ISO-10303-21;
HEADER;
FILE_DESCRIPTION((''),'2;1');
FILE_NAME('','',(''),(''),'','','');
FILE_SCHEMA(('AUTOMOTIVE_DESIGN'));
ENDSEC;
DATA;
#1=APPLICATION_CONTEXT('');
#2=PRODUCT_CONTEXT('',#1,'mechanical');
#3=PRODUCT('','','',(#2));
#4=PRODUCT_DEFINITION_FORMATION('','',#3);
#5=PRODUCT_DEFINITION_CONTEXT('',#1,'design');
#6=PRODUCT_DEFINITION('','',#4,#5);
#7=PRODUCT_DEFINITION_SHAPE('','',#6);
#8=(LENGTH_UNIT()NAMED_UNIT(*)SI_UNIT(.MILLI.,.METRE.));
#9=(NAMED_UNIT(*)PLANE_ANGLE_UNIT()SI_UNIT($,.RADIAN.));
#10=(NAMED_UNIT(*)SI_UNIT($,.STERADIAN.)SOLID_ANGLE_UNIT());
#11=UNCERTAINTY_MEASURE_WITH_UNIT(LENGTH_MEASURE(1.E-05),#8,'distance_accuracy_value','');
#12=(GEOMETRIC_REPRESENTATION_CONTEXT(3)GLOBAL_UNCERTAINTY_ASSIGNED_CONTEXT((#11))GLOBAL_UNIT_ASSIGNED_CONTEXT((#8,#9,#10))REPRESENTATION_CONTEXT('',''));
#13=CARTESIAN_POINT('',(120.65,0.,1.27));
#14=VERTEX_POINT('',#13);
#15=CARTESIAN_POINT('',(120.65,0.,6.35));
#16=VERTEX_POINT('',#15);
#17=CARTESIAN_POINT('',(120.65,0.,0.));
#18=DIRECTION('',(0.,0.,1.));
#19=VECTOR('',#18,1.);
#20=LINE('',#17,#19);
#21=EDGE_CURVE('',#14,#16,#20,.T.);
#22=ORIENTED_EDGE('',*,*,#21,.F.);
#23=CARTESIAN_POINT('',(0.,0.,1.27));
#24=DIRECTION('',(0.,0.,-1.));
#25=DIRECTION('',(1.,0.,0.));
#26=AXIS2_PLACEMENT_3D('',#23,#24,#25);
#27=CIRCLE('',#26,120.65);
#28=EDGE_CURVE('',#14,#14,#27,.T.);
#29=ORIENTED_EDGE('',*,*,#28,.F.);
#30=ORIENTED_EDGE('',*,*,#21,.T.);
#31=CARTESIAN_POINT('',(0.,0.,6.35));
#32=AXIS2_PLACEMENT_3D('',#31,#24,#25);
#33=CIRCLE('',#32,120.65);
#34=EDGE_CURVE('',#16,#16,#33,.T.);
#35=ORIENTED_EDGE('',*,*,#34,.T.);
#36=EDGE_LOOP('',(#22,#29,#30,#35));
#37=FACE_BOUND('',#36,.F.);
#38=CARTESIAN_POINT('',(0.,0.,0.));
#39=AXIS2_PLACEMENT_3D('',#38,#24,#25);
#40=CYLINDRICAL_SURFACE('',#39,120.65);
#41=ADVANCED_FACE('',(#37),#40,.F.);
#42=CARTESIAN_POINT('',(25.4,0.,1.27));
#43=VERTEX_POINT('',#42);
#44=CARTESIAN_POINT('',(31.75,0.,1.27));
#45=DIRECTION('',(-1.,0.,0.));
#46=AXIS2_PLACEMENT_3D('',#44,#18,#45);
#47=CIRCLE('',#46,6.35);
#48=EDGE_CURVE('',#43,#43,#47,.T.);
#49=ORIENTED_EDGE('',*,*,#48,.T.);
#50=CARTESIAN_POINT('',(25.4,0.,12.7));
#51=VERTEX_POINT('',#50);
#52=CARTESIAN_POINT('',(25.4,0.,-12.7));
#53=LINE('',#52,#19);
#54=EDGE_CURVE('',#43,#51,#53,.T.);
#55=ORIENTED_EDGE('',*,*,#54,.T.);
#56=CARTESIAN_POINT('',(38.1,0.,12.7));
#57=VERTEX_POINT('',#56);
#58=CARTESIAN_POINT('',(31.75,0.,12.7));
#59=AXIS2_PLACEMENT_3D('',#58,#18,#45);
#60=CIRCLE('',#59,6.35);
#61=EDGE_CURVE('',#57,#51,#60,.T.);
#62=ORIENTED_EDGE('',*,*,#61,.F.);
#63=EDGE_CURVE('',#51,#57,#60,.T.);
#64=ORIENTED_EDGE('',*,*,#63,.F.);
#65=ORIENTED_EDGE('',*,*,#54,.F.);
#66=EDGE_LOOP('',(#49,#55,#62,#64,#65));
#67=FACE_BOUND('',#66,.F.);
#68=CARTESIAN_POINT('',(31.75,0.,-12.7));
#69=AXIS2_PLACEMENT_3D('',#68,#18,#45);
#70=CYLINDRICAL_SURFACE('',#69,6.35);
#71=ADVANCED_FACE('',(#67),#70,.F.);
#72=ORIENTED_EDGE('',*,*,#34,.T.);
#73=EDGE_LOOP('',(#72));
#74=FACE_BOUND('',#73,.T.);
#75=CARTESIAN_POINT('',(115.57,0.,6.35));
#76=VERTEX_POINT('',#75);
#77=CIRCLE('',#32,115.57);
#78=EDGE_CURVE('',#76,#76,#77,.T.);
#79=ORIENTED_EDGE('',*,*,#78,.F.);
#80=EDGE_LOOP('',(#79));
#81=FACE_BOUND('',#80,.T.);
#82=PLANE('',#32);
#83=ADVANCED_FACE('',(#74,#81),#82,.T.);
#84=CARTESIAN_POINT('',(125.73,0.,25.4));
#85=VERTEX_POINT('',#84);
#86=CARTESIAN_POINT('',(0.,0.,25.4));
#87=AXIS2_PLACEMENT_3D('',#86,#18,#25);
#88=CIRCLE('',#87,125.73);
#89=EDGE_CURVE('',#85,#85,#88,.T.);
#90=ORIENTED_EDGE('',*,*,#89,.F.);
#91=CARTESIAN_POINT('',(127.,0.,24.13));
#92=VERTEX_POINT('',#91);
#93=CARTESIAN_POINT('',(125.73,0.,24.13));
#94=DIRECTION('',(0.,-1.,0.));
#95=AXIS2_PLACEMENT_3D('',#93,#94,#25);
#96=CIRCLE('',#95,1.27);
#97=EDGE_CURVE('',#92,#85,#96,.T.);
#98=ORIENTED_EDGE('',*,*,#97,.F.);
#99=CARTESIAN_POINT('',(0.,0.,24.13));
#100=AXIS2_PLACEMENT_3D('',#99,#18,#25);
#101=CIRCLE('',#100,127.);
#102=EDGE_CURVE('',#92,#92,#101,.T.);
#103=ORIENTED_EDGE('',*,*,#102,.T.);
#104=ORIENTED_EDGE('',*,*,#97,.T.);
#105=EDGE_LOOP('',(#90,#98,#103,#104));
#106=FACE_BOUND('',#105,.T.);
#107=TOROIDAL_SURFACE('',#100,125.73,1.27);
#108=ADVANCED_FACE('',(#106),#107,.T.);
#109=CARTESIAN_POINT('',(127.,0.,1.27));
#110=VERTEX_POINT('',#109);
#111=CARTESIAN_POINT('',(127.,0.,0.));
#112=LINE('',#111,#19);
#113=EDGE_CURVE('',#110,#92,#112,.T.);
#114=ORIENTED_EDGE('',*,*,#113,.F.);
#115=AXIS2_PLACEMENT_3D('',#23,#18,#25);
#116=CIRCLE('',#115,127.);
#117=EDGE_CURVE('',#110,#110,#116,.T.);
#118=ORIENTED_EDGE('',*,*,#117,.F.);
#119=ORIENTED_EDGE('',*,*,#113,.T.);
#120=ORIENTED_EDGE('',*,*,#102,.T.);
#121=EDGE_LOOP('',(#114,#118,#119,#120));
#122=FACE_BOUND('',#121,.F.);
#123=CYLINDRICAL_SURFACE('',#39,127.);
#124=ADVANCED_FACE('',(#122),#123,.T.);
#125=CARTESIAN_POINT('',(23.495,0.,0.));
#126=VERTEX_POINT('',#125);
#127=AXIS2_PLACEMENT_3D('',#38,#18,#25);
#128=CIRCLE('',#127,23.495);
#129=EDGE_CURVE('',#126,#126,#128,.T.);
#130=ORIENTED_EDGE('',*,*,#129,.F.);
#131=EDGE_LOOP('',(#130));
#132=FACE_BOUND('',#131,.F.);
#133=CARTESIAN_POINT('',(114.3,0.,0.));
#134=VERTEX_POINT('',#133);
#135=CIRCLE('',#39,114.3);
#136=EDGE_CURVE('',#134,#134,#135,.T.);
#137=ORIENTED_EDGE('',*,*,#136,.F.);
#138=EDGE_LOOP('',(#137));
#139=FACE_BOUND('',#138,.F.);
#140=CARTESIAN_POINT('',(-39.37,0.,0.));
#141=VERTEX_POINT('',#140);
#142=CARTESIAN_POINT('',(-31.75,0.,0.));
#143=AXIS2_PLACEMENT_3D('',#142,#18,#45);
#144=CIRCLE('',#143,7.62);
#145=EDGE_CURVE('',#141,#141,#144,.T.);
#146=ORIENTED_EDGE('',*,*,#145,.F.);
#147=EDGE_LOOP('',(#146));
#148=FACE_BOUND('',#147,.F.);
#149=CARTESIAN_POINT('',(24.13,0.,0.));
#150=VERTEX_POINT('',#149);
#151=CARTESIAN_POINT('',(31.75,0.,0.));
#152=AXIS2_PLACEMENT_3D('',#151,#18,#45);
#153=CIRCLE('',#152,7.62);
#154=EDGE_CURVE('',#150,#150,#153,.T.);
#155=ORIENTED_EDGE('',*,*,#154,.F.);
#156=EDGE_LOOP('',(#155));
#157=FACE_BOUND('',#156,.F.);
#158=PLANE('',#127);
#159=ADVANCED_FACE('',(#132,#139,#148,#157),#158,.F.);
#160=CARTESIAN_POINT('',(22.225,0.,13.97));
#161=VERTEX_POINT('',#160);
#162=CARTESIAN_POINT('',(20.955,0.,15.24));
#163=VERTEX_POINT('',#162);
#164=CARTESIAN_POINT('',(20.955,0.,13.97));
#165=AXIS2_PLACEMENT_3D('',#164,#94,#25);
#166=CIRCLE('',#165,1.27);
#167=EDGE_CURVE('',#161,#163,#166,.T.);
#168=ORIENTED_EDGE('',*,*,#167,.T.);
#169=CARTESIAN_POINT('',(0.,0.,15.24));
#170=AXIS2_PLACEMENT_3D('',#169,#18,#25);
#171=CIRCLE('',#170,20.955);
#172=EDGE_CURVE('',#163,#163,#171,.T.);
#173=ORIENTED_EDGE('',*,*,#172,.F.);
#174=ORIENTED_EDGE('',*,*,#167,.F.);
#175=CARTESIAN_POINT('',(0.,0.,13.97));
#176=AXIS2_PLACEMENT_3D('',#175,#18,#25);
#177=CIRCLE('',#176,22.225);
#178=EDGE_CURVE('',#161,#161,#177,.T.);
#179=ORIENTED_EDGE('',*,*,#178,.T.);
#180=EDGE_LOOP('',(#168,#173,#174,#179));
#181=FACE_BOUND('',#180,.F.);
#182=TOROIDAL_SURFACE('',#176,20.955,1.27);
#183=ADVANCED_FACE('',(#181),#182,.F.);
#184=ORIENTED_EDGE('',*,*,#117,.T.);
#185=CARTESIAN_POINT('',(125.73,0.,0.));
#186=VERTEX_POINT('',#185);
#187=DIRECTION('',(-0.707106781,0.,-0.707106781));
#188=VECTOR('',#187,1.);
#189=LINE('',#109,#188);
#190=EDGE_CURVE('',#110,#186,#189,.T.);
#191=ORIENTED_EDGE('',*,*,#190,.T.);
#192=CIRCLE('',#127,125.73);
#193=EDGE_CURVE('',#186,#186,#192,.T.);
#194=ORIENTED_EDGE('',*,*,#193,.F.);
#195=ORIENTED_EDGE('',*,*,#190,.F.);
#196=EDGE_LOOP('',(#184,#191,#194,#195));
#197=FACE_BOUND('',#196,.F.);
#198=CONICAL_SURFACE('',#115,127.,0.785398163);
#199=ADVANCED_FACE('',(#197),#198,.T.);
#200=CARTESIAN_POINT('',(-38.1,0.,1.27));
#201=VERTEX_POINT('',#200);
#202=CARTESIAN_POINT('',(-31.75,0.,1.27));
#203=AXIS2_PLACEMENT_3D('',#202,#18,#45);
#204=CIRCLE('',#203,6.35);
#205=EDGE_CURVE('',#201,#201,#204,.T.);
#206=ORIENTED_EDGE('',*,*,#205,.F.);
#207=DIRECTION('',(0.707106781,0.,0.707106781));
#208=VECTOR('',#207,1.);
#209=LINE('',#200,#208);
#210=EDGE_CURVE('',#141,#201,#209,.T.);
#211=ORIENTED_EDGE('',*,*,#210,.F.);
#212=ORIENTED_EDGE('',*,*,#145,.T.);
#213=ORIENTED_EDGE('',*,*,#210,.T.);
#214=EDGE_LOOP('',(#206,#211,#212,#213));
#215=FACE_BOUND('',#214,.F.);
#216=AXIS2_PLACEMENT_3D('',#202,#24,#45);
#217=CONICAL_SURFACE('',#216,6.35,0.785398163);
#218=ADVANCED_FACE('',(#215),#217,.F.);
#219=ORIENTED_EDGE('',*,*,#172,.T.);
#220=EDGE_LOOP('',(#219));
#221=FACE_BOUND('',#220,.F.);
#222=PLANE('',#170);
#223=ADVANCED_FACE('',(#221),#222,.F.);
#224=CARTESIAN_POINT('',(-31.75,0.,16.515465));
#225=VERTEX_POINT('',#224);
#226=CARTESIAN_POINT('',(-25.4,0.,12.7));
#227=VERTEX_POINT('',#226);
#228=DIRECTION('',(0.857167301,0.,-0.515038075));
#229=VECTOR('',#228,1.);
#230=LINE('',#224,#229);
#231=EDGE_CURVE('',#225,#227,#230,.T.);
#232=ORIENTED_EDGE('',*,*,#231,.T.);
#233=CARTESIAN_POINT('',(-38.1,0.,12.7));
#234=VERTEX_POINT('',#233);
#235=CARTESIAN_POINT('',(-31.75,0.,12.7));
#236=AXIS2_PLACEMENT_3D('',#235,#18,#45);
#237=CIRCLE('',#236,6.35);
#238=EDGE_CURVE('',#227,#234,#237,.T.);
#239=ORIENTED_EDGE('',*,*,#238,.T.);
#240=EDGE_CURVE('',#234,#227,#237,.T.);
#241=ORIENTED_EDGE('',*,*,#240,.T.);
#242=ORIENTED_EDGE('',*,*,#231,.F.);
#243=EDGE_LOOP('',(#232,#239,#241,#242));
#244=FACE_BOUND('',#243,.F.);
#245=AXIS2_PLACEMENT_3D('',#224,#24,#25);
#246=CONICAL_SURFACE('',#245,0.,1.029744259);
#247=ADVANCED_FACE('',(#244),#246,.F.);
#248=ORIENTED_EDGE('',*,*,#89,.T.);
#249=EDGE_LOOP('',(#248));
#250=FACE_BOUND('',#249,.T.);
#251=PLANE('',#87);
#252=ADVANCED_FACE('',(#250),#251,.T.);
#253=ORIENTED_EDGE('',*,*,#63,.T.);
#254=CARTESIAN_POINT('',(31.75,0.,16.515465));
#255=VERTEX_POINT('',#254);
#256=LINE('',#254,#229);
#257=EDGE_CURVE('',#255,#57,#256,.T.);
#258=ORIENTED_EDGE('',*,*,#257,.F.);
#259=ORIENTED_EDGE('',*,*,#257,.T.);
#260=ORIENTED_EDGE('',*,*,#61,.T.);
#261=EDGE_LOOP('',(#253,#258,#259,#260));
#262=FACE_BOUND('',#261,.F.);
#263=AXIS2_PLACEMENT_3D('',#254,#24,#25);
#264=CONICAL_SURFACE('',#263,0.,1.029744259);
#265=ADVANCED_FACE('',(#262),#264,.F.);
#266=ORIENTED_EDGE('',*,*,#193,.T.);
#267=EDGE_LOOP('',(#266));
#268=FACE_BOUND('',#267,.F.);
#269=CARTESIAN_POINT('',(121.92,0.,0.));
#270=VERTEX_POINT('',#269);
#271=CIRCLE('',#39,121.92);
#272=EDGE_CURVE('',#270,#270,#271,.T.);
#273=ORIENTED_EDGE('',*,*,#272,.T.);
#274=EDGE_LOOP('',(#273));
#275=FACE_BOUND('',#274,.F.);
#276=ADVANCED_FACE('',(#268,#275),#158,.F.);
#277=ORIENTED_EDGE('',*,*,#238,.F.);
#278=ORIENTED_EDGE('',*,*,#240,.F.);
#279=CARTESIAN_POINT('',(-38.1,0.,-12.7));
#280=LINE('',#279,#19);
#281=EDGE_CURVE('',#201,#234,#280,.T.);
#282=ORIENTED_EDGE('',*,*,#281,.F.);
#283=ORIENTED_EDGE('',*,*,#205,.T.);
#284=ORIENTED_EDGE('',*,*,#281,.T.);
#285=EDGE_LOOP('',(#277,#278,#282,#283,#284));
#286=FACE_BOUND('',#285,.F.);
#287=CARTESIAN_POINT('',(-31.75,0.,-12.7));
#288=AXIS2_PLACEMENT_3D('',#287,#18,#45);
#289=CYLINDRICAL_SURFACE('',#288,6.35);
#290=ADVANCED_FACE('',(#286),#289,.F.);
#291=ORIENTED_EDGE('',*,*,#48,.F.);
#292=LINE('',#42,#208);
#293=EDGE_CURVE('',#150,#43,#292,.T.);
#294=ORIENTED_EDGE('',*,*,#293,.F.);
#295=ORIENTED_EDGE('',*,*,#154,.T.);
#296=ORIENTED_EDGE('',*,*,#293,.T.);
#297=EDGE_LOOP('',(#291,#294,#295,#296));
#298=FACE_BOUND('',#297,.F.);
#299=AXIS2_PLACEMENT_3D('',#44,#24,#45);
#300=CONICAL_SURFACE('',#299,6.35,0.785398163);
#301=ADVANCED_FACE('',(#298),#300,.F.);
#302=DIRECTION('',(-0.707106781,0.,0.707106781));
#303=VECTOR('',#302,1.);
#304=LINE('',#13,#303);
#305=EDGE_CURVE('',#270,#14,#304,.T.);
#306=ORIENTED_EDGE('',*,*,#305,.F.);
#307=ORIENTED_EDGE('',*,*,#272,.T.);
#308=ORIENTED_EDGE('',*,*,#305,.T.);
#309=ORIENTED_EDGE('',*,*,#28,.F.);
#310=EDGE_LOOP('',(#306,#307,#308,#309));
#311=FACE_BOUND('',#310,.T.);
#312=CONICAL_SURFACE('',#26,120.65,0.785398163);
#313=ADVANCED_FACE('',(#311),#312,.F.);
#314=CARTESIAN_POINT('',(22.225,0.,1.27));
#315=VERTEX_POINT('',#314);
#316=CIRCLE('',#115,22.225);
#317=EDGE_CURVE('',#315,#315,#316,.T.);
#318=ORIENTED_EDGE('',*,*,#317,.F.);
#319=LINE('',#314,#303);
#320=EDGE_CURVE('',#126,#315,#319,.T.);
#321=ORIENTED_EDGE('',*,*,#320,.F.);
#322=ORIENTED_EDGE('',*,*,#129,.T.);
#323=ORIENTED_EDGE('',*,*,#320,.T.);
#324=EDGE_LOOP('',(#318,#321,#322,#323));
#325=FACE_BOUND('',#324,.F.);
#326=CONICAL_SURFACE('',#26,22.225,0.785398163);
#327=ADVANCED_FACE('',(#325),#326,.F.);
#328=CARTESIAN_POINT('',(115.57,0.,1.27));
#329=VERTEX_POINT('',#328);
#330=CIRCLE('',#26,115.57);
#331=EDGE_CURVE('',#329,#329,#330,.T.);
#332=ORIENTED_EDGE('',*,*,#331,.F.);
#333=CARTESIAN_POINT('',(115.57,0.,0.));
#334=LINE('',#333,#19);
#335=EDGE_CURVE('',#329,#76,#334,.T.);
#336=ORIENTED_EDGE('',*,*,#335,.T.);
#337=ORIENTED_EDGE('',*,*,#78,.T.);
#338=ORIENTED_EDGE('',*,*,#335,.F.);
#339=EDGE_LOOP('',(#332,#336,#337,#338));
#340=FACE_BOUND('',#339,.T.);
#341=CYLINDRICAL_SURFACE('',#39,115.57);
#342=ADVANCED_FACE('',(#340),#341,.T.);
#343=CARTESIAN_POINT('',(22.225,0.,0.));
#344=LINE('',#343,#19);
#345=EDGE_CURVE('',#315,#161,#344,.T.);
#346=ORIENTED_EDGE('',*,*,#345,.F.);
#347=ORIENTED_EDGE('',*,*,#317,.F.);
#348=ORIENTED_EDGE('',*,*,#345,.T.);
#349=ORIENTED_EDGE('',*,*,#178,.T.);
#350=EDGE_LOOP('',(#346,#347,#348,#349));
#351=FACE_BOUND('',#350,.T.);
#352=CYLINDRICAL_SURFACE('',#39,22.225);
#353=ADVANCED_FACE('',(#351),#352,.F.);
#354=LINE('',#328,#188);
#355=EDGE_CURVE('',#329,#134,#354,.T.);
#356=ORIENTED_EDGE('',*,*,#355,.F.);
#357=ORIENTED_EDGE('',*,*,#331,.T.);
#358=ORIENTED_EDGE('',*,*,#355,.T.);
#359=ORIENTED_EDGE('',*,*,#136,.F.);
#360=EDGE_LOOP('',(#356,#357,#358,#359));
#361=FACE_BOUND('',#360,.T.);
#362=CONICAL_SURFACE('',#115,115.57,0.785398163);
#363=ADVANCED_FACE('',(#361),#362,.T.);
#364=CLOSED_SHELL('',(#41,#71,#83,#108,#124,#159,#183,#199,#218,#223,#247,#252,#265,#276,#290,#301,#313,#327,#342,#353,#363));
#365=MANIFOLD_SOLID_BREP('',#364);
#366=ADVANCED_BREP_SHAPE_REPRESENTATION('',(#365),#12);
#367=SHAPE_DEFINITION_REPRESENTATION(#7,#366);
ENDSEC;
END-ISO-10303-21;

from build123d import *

# Parameters (mm, degrees)
F0_R     = 127
F1_DEPTH = 25.4
F2_R     = 120.65
F2_R_2   = 115.57
F4_DEPTH = 6.35
F3_R     = 22.225
F6_DEPTH = 15.24
F7_D     = 12.7
F7_DEPTH = 12.7
F7_TIP   = 3.8154649308
F8_R     = 1.27
F9_SIZE  = 1.27


with BuildPart() as f1:
    # F0 (on Top) → F1 (new body)
    with BuildSketch(Plane.XY):
        Circle(F0_R)
    extrude(amount=F1_DEPTH)

    # F2 (on face) → F4 (cut)
    with BuildSketch(Plane(origin=(0, 0, 0), x_dir=(1, 0, 0), z_dir=(0, 0, -1))):
        Circle(F2_R)
        Circle(F2_R_2, mode=Mode.SUBTRACT)
    extrude(amount=-F4_DEPTH, mode=Mode.SUBTRACT)

    # F3 (on Top) → F6 (cut)
    with BuildSketch(Plane.XY):
        Circle(F3_R)
    extrude(amount=F6_DEPTH, mode=Mode.SUBTRACT)

    # F7
    with Locations(Plane(origin=(0, 0, 0), x_dir=(1, 0, 0), z_dir=(0, 0, -1))):
        with Locations((31.75, 0), (-31.75, 0)):
            Hole(F7_D / 2, depth=F7_DEPTH)
            with Locations((0, 0, -(F7_DEPTH + F7_TIP / 2))):  # 118° drill point
                Cone(0, F7_D / 2, F7_TIP, mode=Mode.SUBTRACT)

    # F8
    f8_edges = [f1.edges().sort_by_distance(p)[0] for p in [
        (-22.225, 0, 15.24),
        (-127, 0, 25.4),
    ]]
    fillet(f8_edges, radius=F8_R)

    # F9
    f9_edges = [f1.edges().sort_by_distance(p)[0] for p in [
        (-22.225, 0, 0),
        (-115.57, 0, 0),
        (-120.65, 0, 0),
        (-127, 0, 0),
        (-38.1, 0, 0),
        (25.4, 0, 0),
    ]]
    chamfer(f9_edges, length=F9_SIZE)


solid = f1.part
